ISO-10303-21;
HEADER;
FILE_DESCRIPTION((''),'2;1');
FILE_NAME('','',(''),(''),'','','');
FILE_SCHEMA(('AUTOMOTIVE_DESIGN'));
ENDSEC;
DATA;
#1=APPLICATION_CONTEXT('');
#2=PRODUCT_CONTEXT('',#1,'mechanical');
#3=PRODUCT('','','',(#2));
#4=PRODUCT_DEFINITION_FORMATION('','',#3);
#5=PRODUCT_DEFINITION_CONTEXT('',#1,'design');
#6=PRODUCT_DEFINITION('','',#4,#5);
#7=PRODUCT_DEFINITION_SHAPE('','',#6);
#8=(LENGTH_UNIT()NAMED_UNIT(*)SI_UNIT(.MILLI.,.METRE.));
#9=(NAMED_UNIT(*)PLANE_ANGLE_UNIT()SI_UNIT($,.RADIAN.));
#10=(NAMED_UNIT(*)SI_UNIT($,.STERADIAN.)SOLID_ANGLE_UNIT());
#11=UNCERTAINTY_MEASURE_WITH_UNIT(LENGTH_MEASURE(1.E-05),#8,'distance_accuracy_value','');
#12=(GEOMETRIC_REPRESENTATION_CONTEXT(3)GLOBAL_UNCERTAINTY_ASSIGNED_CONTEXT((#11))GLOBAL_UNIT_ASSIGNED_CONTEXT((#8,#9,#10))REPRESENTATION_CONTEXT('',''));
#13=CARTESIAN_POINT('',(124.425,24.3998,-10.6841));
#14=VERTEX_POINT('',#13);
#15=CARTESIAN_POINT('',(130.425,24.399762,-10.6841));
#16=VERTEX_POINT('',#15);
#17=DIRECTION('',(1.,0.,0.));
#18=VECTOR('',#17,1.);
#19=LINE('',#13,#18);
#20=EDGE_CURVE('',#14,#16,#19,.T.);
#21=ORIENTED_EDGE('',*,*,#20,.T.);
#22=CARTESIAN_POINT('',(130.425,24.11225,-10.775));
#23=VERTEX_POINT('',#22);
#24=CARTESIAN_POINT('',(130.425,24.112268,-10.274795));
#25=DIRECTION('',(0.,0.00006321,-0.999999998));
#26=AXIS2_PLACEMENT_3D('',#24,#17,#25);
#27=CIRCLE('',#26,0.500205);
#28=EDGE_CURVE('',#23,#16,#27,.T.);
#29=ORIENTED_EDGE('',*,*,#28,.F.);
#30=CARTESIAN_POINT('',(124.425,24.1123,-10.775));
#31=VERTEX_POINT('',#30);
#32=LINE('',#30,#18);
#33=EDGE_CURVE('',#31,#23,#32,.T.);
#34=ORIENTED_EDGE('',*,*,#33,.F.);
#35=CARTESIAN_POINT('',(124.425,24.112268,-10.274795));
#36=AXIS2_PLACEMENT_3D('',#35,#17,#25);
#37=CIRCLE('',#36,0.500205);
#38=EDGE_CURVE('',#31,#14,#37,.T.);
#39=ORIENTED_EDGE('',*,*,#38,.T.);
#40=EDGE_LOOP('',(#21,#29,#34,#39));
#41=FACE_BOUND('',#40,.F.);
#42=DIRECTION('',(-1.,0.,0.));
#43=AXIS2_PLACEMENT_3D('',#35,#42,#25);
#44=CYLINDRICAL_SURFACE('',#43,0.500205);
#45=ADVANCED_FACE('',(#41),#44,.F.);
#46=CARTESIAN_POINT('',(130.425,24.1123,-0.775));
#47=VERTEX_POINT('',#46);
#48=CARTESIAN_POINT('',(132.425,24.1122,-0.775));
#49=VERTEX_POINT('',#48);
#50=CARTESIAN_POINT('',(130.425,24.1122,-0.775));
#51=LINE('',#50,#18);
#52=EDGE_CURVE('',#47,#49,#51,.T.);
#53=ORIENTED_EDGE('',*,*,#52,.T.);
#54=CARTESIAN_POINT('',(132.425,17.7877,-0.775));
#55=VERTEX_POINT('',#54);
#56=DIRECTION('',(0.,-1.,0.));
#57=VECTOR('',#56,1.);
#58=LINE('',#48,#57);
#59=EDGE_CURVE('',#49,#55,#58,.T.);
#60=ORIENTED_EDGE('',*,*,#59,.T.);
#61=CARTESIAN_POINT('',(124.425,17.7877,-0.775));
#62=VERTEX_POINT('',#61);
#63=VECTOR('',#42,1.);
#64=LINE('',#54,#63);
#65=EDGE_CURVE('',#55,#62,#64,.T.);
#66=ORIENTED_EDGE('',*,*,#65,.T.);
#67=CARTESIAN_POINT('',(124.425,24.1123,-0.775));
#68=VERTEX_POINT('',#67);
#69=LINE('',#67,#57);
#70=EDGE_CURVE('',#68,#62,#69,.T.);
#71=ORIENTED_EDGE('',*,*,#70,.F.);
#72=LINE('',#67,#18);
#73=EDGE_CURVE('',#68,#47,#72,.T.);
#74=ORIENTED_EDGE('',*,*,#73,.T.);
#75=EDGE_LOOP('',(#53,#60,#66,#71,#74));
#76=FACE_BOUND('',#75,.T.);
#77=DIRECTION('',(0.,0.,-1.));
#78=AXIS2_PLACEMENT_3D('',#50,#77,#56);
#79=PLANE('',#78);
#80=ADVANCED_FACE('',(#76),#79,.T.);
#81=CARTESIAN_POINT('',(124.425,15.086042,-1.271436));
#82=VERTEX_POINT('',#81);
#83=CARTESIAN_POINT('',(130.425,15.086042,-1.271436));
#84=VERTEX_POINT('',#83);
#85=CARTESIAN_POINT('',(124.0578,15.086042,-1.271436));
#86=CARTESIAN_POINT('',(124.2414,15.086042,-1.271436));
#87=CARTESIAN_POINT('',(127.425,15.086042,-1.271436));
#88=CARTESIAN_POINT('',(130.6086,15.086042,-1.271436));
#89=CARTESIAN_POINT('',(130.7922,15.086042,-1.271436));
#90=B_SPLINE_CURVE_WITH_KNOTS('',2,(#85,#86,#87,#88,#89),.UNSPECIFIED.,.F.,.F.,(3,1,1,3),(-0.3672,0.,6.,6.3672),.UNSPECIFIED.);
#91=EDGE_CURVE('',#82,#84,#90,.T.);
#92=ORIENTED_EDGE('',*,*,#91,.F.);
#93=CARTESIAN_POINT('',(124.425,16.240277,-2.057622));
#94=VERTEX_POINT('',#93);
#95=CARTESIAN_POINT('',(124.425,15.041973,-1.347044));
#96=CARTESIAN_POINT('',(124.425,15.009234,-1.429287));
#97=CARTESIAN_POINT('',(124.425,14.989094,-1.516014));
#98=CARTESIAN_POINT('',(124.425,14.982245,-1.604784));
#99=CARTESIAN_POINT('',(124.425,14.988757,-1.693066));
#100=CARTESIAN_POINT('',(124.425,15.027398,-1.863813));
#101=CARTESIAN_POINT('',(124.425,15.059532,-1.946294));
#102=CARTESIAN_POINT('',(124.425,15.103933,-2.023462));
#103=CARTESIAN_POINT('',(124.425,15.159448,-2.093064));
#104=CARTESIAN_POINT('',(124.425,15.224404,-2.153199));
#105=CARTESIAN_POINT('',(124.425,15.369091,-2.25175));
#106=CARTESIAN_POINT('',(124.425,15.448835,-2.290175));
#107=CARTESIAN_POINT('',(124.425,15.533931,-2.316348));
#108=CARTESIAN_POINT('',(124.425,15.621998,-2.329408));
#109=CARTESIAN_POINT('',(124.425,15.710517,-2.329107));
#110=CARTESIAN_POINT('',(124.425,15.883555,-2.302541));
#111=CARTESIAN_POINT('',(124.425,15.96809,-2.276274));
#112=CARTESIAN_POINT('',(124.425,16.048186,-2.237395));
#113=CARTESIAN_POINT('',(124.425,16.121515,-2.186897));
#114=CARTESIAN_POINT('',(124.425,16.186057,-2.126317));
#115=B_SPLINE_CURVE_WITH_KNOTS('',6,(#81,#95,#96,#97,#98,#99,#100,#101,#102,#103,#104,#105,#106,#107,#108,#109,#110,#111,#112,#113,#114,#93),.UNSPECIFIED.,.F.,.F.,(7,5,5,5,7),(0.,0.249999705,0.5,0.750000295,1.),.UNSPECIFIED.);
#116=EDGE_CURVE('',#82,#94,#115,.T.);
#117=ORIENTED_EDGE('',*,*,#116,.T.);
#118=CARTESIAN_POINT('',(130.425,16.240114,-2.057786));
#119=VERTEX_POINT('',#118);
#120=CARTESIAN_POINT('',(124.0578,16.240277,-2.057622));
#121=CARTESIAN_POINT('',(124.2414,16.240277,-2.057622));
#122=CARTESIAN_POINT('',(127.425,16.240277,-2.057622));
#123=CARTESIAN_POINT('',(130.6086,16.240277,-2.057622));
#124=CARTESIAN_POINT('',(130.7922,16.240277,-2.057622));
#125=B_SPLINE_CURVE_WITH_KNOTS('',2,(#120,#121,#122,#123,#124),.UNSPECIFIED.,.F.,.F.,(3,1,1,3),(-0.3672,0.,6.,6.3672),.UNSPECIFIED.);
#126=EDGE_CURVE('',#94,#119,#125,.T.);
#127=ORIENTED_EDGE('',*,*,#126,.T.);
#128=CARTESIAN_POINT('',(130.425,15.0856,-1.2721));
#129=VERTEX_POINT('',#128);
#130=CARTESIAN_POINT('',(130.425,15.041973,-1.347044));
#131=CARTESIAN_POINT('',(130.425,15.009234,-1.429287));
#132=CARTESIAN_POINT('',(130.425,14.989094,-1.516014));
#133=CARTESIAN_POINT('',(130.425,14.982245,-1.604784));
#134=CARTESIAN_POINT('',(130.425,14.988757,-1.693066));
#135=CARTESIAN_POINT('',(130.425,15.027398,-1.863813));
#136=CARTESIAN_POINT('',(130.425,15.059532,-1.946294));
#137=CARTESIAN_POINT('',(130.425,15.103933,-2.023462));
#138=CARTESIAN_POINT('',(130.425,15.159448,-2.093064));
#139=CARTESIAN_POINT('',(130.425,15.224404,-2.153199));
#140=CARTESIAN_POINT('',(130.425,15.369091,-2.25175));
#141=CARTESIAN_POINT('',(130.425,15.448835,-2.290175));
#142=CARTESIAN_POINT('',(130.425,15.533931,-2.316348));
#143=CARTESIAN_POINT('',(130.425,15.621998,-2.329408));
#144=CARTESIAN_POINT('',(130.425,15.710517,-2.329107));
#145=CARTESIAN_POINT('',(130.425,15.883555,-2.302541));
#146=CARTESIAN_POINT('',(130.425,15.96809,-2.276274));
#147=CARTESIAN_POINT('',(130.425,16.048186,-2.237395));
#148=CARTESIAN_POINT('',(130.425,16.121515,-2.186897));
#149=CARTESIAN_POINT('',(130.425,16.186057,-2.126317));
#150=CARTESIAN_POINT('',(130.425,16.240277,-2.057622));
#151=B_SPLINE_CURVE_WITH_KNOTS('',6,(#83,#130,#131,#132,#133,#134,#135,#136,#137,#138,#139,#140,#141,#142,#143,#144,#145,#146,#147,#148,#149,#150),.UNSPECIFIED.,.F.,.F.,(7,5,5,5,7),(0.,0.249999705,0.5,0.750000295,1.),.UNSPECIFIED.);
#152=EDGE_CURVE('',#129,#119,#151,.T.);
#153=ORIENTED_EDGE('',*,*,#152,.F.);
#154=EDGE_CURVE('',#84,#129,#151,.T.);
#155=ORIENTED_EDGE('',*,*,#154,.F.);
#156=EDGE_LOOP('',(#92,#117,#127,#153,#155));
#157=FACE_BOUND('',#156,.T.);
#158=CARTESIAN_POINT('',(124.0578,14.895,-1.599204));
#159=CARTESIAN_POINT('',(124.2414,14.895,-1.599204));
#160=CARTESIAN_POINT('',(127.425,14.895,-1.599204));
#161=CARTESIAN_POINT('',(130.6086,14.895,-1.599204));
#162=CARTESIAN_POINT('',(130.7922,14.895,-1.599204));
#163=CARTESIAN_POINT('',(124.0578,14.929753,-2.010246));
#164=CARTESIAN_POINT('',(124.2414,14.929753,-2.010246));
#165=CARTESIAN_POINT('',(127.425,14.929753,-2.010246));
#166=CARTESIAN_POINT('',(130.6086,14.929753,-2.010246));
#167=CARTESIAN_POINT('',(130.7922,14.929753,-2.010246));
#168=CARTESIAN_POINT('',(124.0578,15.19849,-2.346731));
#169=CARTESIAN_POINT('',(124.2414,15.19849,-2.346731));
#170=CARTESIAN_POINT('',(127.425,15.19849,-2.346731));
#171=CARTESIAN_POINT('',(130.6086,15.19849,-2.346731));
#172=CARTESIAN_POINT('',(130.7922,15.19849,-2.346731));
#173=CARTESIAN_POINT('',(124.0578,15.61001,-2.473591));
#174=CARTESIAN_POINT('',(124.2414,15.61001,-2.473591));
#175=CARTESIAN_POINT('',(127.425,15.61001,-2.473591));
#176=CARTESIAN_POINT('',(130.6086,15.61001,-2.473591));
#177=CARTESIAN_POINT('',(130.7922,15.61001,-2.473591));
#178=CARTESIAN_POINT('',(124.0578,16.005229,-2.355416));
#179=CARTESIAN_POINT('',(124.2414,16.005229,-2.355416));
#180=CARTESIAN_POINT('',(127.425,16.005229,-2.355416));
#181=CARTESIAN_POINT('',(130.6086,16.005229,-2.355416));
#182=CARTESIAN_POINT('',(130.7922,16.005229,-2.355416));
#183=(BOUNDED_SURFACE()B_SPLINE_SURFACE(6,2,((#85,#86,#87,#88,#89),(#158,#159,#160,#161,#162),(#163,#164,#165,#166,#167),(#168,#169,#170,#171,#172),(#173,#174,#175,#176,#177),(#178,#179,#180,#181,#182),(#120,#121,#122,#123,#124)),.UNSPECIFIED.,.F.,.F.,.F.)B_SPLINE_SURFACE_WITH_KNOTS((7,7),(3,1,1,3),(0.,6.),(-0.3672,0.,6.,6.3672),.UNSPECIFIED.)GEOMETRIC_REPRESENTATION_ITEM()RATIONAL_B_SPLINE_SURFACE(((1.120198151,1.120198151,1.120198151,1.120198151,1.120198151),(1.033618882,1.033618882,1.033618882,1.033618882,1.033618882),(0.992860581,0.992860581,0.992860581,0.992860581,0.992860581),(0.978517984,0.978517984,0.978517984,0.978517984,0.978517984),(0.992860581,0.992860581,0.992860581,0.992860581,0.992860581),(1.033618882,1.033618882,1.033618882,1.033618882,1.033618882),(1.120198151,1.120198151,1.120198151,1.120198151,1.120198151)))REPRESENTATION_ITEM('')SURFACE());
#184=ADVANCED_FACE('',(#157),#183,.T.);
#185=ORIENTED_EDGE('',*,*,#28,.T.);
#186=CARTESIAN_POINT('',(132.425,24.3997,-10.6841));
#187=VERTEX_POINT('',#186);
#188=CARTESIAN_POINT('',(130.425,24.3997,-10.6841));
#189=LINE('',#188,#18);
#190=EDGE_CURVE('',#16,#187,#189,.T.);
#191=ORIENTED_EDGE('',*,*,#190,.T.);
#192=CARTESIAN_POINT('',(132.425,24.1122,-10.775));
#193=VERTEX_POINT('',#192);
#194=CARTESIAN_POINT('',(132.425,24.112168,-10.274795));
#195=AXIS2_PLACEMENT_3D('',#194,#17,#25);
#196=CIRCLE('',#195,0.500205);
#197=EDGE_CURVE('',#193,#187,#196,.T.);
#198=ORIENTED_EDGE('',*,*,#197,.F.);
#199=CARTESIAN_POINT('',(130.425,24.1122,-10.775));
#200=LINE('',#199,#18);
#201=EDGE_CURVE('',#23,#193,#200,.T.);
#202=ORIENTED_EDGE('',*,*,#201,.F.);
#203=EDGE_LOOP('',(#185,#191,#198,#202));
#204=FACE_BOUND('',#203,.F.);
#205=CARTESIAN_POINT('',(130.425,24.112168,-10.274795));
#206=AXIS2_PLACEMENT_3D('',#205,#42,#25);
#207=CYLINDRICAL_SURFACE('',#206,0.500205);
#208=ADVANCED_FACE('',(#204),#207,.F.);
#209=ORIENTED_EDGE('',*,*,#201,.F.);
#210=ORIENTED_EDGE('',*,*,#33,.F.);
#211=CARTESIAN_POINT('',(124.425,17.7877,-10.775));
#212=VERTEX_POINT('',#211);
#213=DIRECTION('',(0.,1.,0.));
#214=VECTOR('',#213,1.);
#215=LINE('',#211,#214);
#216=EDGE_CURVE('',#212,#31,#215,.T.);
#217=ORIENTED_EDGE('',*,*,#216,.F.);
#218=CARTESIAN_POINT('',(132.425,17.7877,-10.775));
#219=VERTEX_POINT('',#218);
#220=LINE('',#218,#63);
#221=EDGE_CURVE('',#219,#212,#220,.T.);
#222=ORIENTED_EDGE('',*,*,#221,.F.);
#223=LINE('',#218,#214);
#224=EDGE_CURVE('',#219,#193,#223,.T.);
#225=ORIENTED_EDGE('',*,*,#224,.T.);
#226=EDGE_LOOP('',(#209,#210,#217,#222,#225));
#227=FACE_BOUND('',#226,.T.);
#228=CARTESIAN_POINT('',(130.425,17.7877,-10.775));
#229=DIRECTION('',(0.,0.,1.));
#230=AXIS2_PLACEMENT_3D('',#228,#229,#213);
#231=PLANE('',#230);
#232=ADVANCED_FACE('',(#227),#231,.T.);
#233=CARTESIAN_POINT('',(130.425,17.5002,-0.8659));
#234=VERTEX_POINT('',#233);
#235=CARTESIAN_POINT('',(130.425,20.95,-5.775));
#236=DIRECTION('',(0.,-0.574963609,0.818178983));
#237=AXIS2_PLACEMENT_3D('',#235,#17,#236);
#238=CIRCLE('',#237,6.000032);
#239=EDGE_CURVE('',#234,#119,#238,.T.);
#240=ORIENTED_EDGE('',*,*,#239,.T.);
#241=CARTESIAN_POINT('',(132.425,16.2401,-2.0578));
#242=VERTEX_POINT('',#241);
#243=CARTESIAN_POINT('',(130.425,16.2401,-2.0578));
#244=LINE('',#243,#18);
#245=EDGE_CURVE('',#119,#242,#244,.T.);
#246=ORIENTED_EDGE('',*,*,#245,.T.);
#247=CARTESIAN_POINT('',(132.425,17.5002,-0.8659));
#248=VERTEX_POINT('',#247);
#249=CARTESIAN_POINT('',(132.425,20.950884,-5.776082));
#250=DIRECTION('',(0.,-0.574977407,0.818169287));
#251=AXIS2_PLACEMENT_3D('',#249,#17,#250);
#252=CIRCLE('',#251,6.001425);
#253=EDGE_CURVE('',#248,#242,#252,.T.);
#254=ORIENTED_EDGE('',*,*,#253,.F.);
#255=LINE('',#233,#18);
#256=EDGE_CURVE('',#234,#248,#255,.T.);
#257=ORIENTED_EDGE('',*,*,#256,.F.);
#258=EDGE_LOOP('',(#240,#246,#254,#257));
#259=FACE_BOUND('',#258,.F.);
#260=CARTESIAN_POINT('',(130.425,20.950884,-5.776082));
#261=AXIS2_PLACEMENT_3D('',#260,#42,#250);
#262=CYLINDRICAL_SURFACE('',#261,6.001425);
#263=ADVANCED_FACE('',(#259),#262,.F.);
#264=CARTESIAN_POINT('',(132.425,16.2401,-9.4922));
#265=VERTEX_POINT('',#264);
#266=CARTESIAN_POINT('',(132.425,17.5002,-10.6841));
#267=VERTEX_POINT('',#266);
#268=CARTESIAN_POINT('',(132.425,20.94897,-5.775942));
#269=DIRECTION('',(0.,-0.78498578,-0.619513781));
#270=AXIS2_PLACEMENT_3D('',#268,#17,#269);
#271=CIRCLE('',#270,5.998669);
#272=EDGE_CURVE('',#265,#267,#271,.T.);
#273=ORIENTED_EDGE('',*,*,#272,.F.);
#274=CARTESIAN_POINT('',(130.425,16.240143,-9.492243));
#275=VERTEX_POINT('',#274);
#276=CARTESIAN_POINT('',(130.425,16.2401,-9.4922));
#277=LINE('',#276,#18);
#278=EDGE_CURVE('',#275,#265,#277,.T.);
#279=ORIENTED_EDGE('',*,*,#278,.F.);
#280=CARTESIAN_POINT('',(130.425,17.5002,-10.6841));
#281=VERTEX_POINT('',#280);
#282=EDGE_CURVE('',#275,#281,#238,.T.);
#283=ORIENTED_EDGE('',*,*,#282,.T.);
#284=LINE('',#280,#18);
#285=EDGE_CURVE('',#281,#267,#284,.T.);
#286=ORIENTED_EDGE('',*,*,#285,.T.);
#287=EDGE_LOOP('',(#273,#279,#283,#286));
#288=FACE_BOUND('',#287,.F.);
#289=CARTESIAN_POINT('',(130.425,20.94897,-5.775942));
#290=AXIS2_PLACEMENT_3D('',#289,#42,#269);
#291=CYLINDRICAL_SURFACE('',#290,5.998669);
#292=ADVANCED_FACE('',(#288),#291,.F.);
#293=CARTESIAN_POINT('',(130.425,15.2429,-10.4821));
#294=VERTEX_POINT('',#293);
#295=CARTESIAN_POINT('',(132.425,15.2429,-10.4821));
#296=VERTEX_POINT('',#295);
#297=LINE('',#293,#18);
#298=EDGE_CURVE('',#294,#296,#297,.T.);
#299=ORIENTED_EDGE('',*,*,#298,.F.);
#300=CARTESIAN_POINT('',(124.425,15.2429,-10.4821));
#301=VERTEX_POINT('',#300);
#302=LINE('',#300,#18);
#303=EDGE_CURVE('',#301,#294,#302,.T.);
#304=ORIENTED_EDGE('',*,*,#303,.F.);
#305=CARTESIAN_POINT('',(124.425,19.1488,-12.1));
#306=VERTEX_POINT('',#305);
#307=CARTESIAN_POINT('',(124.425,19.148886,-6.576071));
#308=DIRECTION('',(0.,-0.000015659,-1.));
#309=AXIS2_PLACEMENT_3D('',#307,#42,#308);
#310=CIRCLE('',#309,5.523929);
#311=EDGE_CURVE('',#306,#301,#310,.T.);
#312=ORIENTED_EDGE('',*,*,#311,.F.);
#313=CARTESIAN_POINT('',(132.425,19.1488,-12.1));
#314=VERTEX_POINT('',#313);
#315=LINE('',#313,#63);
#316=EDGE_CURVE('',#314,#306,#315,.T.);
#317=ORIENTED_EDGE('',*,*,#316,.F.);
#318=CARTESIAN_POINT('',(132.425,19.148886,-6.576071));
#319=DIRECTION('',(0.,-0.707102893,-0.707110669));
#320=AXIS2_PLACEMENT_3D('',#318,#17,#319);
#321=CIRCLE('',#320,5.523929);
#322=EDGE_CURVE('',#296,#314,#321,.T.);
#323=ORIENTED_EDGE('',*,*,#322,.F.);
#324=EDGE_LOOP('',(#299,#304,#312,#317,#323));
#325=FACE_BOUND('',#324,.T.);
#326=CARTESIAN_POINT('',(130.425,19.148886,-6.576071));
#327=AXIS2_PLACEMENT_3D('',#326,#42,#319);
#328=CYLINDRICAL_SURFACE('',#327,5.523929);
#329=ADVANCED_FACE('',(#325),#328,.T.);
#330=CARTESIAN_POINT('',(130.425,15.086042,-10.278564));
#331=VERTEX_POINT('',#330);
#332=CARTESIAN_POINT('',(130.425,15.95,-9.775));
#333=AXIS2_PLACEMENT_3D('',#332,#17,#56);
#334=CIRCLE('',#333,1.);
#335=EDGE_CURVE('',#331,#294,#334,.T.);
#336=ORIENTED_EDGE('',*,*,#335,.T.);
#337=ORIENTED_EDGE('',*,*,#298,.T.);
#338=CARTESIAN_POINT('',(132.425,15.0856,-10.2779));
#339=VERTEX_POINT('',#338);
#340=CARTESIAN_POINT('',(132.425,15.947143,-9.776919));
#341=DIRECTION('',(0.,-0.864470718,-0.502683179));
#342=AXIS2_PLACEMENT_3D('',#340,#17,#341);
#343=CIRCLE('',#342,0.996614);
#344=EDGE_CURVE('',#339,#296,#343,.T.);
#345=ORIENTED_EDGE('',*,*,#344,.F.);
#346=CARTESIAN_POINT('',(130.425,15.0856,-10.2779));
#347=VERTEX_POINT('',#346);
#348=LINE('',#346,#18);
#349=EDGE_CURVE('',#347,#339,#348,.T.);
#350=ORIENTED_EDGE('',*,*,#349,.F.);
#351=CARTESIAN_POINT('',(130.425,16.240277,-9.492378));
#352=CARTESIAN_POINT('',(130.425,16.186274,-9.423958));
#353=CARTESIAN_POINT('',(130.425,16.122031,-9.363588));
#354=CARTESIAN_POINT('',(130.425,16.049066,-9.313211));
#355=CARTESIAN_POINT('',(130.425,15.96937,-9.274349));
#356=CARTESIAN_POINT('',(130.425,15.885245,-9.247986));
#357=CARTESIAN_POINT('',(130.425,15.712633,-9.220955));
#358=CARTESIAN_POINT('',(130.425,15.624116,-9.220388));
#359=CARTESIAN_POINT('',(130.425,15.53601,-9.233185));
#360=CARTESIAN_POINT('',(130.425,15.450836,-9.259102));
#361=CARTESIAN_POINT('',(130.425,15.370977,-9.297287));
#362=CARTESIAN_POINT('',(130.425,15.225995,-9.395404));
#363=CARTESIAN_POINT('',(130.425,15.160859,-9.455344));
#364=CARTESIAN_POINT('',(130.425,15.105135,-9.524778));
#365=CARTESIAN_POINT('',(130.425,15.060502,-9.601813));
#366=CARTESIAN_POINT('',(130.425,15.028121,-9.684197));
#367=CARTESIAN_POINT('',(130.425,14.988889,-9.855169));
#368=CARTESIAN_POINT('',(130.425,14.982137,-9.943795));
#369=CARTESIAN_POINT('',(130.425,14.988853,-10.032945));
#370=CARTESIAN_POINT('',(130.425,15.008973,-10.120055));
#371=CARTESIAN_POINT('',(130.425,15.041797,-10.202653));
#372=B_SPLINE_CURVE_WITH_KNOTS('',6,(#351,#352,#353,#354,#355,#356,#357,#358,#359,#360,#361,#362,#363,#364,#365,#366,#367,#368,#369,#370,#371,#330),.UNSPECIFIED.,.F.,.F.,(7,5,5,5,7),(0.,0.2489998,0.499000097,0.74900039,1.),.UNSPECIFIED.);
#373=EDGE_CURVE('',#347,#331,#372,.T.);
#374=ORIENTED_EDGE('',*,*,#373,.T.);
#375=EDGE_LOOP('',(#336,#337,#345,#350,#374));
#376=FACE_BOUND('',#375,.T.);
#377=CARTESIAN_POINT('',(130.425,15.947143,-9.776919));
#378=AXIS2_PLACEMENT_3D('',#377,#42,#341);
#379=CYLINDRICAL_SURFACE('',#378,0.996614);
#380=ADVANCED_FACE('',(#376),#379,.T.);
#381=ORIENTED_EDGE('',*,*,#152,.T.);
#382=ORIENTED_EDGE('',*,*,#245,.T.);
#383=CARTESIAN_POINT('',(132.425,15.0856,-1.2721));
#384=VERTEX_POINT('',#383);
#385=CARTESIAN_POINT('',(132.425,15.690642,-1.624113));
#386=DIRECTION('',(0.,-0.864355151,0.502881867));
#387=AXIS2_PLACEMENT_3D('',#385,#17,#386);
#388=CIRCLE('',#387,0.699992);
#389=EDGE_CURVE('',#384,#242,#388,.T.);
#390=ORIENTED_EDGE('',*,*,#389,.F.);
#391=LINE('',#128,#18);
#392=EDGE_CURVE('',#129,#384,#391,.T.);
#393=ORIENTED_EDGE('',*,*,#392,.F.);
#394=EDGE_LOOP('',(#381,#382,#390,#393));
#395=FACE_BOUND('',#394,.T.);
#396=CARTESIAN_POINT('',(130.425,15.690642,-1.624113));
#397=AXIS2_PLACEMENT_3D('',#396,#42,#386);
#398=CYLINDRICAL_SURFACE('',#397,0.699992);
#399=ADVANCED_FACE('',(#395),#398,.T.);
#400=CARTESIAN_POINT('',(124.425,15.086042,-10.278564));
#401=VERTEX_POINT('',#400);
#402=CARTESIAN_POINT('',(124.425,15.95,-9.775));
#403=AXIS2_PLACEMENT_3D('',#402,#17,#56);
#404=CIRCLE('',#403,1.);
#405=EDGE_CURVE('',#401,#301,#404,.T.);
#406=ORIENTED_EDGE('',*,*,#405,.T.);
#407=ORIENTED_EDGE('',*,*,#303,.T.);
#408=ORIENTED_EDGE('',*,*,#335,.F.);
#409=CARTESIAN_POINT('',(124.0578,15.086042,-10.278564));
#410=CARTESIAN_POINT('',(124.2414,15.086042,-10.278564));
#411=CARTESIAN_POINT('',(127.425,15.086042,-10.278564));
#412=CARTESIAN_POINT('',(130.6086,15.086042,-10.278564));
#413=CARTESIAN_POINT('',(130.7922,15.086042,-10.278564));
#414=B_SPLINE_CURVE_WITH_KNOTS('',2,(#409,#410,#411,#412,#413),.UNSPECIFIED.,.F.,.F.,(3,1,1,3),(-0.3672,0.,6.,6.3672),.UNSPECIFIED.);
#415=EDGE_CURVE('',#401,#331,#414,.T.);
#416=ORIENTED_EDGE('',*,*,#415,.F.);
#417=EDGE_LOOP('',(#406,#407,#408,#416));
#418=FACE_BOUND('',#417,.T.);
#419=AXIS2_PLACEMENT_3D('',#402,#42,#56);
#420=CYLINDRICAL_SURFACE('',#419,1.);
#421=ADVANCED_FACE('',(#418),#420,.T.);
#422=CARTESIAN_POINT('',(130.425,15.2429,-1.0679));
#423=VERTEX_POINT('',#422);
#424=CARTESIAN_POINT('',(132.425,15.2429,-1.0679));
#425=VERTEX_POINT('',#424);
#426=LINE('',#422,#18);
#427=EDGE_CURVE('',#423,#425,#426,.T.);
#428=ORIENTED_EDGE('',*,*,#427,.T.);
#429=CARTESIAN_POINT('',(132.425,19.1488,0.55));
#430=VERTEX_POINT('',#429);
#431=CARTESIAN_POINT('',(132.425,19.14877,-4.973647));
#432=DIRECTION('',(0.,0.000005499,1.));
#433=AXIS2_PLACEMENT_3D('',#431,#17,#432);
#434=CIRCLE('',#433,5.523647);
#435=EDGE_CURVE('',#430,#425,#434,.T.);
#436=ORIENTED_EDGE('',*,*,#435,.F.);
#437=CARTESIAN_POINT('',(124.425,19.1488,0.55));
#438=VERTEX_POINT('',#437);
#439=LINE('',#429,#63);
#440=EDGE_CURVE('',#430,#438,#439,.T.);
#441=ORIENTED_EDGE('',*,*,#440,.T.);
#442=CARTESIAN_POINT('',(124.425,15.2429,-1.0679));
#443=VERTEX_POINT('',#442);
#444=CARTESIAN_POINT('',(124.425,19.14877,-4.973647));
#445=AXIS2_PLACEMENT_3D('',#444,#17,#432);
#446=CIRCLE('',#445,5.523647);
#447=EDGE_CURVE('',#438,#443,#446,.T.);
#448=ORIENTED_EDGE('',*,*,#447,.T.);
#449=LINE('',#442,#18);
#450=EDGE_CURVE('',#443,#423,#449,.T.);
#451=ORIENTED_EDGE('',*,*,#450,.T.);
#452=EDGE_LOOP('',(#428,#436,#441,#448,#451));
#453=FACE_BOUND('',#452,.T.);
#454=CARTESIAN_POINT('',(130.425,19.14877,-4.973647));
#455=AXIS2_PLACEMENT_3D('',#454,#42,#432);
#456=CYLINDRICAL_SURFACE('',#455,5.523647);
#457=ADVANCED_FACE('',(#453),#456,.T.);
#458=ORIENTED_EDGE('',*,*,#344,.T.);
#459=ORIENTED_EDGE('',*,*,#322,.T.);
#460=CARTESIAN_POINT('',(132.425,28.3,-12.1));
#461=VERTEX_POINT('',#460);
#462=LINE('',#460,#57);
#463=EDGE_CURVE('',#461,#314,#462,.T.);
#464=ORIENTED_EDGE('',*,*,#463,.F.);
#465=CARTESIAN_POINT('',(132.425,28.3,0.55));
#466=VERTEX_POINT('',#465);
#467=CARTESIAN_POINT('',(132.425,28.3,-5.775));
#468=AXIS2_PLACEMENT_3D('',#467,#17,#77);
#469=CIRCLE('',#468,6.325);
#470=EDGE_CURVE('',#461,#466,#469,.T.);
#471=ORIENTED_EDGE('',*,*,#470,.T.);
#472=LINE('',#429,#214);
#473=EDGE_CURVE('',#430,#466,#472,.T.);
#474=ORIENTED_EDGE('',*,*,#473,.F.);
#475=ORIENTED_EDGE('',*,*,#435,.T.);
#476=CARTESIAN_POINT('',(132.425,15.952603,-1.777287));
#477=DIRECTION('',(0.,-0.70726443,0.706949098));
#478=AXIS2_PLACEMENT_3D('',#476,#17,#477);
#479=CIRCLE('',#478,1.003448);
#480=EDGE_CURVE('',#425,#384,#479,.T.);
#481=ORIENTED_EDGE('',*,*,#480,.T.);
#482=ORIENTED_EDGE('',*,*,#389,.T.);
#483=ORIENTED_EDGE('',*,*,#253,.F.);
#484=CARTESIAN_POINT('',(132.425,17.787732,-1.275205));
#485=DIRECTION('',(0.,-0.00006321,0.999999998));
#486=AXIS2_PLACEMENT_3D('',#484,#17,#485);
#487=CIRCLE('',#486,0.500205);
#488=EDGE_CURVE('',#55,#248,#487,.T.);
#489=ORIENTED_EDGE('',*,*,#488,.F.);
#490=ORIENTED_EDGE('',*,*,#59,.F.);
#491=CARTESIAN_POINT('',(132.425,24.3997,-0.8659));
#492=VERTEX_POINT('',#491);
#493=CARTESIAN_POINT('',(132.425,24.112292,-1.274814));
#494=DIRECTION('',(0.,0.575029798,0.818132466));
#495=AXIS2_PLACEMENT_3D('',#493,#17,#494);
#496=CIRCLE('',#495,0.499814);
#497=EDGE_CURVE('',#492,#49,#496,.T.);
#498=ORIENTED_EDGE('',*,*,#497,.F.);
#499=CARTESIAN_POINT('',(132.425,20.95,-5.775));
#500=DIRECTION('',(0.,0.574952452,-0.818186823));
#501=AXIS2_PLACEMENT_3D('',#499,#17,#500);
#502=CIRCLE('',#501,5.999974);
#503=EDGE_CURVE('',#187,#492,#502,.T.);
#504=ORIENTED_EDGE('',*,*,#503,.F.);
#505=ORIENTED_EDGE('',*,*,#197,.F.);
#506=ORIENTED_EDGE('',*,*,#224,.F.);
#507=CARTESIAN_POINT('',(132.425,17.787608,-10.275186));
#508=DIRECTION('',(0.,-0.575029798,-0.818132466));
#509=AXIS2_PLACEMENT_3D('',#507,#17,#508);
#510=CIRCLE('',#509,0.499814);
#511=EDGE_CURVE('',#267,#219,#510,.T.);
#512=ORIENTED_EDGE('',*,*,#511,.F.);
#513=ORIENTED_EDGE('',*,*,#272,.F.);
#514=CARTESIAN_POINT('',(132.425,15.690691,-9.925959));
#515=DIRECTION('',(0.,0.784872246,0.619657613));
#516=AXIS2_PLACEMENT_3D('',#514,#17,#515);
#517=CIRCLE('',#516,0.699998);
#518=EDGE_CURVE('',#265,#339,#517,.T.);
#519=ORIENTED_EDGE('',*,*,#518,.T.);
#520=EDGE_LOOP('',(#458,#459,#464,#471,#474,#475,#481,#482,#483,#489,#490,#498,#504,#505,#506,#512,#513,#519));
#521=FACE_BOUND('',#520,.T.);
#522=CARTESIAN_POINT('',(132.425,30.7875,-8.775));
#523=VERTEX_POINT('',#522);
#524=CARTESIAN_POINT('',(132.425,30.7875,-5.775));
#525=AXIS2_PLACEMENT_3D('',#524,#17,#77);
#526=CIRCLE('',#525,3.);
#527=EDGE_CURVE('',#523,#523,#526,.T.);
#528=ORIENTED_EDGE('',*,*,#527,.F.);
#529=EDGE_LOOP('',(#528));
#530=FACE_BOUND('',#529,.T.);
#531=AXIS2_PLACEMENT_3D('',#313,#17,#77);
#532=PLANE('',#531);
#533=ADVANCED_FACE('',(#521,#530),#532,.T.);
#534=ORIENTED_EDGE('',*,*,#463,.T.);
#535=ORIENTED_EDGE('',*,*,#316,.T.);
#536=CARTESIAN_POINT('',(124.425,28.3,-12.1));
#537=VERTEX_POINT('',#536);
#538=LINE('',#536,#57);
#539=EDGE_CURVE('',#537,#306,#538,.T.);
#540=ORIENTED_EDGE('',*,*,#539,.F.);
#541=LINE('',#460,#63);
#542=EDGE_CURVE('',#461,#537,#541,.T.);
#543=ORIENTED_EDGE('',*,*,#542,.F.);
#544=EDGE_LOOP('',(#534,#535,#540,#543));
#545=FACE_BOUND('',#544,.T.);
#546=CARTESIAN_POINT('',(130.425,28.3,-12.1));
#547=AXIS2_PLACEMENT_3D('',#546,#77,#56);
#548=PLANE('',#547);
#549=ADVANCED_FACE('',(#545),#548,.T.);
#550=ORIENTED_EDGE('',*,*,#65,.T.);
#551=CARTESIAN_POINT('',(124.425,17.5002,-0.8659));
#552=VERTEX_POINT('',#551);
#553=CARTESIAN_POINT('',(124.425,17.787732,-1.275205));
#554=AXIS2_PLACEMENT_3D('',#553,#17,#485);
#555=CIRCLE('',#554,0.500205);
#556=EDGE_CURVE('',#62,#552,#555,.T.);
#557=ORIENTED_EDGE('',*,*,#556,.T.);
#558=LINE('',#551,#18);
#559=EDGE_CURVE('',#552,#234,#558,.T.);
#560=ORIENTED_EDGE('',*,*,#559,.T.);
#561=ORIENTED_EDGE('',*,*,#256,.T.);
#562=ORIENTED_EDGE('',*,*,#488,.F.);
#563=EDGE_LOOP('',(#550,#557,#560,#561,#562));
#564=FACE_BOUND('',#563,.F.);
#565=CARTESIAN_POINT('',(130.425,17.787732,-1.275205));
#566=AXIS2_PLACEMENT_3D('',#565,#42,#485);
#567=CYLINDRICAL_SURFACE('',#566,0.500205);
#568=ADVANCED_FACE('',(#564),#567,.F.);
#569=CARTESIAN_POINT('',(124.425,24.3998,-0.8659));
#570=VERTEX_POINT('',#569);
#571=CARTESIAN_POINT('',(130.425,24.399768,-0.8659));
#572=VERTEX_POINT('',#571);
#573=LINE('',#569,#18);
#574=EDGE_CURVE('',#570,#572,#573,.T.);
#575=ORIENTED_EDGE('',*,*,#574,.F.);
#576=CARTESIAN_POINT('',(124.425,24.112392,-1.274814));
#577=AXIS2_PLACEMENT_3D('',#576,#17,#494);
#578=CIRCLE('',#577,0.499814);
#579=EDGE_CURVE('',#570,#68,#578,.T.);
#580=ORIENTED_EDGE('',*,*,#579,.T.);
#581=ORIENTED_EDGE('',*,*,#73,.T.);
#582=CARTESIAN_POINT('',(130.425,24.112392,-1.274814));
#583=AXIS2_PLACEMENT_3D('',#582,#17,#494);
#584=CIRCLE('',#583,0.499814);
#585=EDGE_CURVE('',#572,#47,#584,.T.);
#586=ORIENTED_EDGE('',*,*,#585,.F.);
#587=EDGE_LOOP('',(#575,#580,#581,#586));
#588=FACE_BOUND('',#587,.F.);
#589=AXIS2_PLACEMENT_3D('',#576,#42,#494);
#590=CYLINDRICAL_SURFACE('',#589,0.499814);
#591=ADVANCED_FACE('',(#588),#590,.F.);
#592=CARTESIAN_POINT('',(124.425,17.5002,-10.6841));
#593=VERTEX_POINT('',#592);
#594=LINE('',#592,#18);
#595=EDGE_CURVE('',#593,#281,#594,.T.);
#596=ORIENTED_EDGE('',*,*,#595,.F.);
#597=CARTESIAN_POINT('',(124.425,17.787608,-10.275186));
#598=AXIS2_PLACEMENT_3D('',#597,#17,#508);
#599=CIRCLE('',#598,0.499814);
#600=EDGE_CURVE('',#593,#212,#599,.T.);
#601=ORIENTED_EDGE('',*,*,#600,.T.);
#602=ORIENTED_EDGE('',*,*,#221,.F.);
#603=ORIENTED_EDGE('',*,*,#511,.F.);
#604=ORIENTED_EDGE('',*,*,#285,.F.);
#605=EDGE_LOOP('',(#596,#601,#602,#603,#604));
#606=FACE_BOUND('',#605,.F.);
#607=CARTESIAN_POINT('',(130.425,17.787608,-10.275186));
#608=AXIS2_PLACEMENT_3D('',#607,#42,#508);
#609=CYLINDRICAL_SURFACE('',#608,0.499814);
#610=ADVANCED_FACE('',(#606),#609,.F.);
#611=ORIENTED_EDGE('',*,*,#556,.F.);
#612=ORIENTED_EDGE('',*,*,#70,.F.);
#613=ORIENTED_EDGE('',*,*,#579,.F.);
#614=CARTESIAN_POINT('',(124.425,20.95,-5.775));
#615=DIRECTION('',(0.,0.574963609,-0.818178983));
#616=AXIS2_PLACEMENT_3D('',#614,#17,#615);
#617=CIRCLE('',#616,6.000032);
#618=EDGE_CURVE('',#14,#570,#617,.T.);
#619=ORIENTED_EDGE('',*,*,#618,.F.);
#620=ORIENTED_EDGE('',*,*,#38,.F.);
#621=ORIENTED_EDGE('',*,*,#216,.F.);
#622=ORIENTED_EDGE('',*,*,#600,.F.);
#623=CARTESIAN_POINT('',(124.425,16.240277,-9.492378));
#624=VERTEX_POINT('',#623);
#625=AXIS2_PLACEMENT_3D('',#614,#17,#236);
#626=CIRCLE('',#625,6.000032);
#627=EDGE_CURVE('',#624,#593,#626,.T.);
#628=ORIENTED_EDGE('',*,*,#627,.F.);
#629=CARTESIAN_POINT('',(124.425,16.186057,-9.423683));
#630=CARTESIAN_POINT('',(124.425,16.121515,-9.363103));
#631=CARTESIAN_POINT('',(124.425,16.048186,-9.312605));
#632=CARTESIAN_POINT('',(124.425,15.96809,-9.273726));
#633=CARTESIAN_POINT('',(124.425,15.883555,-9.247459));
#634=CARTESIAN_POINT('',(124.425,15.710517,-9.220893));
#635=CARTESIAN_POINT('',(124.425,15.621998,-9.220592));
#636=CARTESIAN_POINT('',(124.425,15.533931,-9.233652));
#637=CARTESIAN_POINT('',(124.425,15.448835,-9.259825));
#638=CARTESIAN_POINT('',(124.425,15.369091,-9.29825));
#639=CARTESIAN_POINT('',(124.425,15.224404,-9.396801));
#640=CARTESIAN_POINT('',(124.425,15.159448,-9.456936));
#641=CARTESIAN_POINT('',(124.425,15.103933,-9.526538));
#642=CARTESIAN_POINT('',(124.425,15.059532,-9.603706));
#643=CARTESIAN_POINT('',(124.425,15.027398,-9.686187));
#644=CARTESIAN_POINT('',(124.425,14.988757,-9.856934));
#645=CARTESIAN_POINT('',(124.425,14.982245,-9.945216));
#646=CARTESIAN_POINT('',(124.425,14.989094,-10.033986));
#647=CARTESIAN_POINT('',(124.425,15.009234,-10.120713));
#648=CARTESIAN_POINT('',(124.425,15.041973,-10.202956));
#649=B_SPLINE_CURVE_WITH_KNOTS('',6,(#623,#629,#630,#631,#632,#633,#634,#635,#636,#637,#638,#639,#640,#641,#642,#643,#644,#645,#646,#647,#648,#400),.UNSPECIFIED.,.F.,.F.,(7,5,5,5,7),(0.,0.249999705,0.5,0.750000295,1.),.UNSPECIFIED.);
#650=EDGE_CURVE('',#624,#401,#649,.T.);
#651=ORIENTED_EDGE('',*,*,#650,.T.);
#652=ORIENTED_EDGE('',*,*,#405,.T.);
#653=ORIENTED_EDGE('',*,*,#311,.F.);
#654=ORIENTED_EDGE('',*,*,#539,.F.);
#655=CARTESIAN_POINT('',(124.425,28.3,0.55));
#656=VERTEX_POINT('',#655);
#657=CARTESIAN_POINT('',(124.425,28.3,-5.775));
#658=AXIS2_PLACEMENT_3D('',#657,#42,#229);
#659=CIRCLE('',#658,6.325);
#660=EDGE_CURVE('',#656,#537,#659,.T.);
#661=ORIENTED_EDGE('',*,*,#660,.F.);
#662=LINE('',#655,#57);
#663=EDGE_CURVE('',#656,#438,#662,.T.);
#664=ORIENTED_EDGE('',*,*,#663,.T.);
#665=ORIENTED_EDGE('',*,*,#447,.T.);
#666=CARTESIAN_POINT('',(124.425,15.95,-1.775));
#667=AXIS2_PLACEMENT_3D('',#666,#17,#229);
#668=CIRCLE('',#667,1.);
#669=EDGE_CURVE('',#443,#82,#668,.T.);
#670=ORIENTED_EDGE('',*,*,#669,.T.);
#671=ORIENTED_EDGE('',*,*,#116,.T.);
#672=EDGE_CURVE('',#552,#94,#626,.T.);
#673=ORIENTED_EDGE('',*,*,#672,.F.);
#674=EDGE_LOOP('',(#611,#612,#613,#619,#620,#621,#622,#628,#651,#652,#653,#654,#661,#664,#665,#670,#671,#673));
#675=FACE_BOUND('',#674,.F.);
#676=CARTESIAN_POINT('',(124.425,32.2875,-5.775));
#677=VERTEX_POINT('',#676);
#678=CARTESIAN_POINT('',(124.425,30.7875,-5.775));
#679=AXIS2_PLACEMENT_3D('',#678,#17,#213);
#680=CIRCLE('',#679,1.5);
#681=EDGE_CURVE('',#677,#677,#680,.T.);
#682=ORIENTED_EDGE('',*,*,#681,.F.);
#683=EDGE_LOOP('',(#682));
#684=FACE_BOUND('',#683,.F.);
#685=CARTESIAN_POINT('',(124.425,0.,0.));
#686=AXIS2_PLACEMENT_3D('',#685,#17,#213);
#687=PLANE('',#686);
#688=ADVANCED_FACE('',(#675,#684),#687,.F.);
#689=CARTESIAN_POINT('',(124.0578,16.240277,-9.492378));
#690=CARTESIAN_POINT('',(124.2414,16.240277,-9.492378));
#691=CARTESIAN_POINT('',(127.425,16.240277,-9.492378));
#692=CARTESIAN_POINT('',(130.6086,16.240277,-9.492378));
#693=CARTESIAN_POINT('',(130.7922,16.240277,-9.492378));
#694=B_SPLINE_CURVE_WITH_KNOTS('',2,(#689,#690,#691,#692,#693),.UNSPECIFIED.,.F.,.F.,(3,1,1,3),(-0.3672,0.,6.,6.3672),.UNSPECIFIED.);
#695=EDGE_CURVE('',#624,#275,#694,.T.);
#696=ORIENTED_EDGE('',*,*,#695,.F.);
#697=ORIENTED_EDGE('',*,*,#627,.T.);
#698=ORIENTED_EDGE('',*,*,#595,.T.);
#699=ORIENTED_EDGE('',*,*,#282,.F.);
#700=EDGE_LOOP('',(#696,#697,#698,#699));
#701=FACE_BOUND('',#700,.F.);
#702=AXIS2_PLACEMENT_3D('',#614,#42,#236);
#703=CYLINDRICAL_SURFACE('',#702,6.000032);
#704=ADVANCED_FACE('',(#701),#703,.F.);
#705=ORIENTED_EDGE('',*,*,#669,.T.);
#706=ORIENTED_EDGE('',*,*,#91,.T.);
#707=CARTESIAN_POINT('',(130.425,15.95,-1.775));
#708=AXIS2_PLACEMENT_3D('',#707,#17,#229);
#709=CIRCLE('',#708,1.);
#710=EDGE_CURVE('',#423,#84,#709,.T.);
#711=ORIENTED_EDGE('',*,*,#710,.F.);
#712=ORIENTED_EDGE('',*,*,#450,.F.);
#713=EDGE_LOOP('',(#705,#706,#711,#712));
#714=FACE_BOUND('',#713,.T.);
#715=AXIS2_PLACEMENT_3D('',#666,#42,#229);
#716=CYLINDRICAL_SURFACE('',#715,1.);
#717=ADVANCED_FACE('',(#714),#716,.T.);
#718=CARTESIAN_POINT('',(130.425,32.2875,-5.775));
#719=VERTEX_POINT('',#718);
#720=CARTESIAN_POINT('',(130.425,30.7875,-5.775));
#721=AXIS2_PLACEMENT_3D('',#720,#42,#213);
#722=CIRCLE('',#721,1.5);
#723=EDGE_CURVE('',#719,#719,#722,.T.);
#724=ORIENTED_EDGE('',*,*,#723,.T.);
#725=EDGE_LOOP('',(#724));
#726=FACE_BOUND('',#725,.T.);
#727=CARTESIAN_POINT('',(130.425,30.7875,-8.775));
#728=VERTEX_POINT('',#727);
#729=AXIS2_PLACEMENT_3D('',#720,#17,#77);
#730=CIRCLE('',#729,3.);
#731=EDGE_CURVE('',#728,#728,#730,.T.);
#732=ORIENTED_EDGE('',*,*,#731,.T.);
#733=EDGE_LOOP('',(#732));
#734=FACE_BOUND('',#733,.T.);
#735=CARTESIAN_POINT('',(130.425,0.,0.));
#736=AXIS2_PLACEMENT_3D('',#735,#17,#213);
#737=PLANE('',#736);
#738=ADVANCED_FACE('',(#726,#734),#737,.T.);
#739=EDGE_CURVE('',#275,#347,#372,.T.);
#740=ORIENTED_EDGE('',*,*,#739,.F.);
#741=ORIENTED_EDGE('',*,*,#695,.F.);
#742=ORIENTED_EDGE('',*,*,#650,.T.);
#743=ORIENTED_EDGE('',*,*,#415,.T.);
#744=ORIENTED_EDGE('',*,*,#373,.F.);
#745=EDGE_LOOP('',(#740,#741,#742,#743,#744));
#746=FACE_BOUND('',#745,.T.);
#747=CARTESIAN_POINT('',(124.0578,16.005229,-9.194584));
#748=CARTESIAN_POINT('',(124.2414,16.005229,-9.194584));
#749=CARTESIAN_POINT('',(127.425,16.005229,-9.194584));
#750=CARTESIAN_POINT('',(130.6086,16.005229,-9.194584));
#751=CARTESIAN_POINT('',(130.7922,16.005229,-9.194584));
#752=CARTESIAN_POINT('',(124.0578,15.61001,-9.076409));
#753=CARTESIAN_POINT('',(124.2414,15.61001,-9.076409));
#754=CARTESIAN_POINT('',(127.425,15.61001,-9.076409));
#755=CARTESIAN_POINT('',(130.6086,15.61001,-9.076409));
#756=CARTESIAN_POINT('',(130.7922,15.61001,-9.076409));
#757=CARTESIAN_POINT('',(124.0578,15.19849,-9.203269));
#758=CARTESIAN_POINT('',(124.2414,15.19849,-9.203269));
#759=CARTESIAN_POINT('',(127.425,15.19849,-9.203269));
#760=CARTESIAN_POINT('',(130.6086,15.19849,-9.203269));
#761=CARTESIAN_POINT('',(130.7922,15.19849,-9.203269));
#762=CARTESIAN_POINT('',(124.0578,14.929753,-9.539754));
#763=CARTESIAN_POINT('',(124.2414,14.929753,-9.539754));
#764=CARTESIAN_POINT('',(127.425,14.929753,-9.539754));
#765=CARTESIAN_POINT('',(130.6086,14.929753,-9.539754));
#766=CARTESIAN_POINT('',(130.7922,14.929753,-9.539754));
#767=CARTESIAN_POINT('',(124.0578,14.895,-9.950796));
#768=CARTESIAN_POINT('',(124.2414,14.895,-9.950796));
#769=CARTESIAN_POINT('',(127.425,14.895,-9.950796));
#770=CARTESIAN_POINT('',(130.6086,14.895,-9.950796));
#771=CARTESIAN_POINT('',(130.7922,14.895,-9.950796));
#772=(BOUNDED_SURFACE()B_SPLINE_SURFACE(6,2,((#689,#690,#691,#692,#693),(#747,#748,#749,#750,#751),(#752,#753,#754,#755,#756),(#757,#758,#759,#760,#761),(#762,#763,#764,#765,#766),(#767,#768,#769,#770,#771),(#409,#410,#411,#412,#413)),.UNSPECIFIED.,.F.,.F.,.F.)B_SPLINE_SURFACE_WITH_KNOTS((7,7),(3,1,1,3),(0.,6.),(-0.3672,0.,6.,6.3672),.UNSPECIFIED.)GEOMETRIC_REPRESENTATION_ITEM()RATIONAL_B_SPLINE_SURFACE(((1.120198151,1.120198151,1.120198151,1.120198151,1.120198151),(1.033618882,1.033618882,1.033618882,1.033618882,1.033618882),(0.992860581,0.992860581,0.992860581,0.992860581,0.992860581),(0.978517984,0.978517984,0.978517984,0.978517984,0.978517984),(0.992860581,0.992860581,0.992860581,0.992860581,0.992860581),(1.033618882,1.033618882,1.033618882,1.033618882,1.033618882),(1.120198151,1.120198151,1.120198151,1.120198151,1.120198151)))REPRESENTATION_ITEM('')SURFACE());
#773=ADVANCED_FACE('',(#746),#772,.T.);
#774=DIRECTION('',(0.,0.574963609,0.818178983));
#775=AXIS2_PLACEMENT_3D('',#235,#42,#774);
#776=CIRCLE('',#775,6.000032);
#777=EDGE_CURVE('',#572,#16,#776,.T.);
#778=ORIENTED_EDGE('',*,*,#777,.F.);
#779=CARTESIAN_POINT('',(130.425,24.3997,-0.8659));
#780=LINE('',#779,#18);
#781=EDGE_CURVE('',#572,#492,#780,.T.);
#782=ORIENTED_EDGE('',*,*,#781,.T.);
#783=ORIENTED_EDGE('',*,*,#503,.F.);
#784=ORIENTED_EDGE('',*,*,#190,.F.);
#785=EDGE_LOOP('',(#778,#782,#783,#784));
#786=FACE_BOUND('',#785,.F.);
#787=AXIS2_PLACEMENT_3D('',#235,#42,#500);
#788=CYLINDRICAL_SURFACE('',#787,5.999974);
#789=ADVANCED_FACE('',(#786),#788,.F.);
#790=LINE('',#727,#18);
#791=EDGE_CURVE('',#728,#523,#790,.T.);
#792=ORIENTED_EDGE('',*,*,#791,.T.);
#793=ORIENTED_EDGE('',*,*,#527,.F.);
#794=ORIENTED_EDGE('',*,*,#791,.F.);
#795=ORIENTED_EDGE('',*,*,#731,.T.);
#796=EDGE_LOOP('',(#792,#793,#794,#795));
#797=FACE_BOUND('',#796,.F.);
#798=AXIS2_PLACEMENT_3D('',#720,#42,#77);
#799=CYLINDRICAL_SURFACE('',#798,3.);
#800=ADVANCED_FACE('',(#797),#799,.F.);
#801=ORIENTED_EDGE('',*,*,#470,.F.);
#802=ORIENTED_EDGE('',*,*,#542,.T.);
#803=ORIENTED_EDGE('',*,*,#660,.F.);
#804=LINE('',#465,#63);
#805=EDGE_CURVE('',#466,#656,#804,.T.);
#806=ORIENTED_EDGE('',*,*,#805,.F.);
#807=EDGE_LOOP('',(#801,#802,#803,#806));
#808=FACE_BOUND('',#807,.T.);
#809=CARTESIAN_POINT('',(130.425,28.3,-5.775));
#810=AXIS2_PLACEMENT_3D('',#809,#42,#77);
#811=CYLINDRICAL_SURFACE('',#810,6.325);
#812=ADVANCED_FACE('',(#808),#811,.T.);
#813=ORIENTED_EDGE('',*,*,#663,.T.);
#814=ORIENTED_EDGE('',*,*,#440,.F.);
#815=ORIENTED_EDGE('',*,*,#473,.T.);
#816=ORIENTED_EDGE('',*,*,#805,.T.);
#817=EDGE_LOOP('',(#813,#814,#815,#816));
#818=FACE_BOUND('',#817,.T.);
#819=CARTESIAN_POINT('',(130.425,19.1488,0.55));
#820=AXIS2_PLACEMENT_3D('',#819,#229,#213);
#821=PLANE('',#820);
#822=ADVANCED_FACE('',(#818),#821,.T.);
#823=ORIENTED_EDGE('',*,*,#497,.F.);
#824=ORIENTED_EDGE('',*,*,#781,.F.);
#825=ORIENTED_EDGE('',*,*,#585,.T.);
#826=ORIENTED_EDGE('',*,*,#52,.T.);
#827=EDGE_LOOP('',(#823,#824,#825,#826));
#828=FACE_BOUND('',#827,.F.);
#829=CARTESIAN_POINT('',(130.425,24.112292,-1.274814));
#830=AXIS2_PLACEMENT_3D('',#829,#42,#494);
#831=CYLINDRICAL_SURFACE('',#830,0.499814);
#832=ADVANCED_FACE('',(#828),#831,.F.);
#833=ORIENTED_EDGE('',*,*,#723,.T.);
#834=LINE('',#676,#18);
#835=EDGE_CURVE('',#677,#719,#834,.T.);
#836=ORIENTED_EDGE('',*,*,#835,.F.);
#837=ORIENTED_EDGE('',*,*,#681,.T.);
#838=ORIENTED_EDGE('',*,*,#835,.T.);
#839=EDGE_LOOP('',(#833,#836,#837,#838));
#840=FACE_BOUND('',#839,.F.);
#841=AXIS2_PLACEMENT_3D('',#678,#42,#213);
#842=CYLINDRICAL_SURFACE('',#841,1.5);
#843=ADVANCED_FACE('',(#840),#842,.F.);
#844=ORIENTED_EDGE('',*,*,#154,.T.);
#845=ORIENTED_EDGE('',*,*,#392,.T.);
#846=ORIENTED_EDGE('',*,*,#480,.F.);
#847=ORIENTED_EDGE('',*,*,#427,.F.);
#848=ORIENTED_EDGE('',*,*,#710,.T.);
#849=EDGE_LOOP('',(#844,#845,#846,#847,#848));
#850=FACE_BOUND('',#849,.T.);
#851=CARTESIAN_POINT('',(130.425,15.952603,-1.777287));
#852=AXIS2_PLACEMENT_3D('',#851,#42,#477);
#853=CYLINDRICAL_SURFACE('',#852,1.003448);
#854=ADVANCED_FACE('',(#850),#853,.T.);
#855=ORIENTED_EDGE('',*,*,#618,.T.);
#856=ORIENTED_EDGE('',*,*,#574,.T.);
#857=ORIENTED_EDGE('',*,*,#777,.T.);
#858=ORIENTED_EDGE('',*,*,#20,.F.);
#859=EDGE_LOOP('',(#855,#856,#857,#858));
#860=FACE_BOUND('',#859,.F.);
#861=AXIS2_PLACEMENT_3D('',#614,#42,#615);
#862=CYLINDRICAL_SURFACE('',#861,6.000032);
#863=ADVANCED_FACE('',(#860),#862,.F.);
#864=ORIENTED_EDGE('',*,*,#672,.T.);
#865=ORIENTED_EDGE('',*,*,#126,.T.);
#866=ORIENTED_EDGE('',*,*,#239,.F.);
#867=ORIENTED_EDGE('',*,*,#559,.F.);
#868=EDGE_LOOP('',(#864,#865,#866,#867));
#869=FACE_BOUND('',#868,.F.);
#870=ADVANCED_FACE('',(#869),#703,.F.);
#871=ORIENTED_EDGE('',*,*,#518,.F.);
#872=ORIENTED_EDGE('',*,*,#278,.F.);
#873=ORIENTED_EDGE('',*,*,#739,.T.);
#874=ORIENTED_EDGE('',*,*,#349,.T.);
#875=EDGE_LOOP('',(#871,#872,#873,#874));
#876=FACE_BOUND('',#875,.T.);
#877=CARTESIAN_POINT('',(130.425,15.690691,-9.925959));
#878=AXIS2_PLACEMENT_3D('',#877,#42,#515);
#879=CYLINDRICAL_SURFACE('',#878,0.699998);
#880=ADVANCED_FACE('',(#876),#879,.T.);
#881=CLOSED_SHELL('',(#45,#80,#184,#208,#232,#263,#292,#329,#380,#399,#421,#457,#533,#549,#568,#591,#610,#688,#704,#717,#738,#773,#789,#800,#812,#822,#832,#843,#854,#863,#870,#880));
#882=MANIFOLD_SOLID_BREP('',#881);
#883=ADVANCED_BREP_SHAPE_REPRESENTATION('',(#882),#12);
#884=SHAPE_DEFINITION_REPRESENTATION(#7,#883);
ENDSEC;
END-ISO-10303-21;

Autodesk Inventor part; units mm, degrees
ref_plane "YZ Plane" through (0, 0, 0) normal (1, 0, 0) x (0, 1, 0)
ref_plane "XZ Plane" through (0, 0, 0) normal (0, 1, 0) x (-1, 0, 0)
sketch "Sketch1" plane through (0, 0, 0) normal (1, 0, 0) x (0, 1, 0)
  line L0 (14.875, -0.7) -> (14.875, 0.8967) projected
  line L1 (27.025, -0.7) -> (14.875, -0.7) projected
  line L2 (27.025, -10.85) -> (27.025, -0.7) projected
  line L3 (15.75, -10.85) -> (27.025, -10.85) projected
  line L4 (34.625, -12.1) -> (15.75, -12.1) projected
  line L5 (34.625, -3.2) -> (34.625, -12.1) projected
  line L6 (15.7197, 0.55) -> (30.875, 0.55) projected
  arc A0 (17.7877, -0.775) -> (17.5002, -0.8659) centre (17.7877, -1.275) ccw projected
  arc A1 (17.5002, -0.8659) -> (17.5002, -10.6841) centre (20.95, -5.775) ccw projected
  arc A2 (17.5002, -10.6841) -> (17.7877, -10.775) centre (17.7877, -10.275) ccw projected
  line L7 (17.7877, -10.775) -> (24.1123, -10.775) projected
  arc A3 (24.1123, -10.775) -> (24.3998, -10.6841) centre (24.1123, -10.275) ccw projected
  arc A4 (24.3998, -10.6841) -> (24.3998, -0.8659) centre (20.95, -5.775) ccw projected
  arc A5 (24.3998, -0.8659) -> (24.1123, -0.775) centre (24.1123, -1.275) ccw projected
  line L8 (24.1123, -0.775) -> (17.7877, -0.775) projected
  line L9 (26.95, -5.775) -> (26.95, -9.775) projected
  arc A6 (24.3998, -10.6841) -> (26.95, -5.775) centre (20.95, -5.775) ccw projected
  arc A7 (24.1123, -10.775) -> (24.3998, -10.6841) centre (24.1123, -10.275) ccw projected
  line L10 (25.95, -10.775) -> (24.1123, -10.775) projected
  arc A8 (25.95, -10.775) -> (26.95, -9.775) centre (25.95, -9.775) ccw projected
  line L11 (24.1123, -0.775) -> (25.95, -0.775) projected
  arc A9 (24.3998, -0.8659) -> (24.1123, -0.775) centre (24.1123, -1.275) ccw projected
  arc A10 (26.95, -5.775) -> (24.3998, -0.8659) centre (20.95, -5.775) ccw projected
  line L12 (26.95, -1.775) -> (26.95, -5.775) projected
  arc A11 (26.95, -1.775) -> (25.95, -0.775) centre (25.95, -1.775) ccw projected
  line L13 (14.95, -5.775) -> (14.95, -1.775) projected
  arc A12 (17.5002, -0.8659) -> (14.95, -5.775) centre (20.95, -5.775) ccw projected
  arc A13 (17.7877, -0.775) -> (17.5002, -0.8659) centre (17.7877, -1.275) ccw projected
  line L14 (15.95, -0.775) -> (17.7877, -0.775) projected
  arc A14 (15.95, -0.775) -> (14.95, -1.775) centre (15.95, -1.775) ccw projected
  line L15 (17.7877, -10.775) -> (15.95, -10.775) projected
  arc A15 (17.5002, -10.6841) -> (17.7877, -10.775) centre (17.7877, -10.275) ccw projected
  arc A16 (14.95, -5.775) -> (17.5002, -10.6841) centre (20.95, -5.775) ccw projected
  line L16 (14.95, -9.775) -> (14.95, -5.775) projected
  arc A17 (14.95, -9.775) -> (15.95, -10.775) centre (15.95, -9.775) ccw projected
  line L17 (26.95, -10.85) -> (14.95, -10.85)
  line L18 (14.95, -10.85) -> (14.95, -12.1)
  line L19 (14.95, -12.1) -> (26.95, -12.1)
  line L20 (26.95, -12.1) -> (26.95, -10.85)
  line L21 (20.95, -5.775) -> (14.95, -5.775)
  arc A18 (15.2429, -10.4821) -> (19.1488, -12.1) centre (19.1488, -6.5762) ccw
  arc A19 (15.8269, -8.8981) -> (14.95, -9.775) centre (15.8269, -9.775) ccw
  line L22 (14.95, -9.775) -> (15.8269, -8.8981) construction
  line L23 (14.95, -9.775) -> (16.1901, -9.775) construction
  line L24 (26.95, -0.7) -> (14.95, -0.7)
  line L25 (14.95, -0.7) -> (14.95, 0.55)
  line L26 (14.95, 0.55) -> (26.95, 0.55)
  line L27 (26.95, 0.55) -> (26.95, -0.7)
  arc A20 (19.1488, 0.55) -> (15.2429, -1.0679) centre (19.1488, -4.9738) ccw
  arc A21 (14.95, -1.775) -> (15.8269, -2.6519) centre (15.8269, -1.775) ccw
  line L28 (26.95, -12.1) -> (26.95, 0.55)
  line L29 (26.95, 0.55) -> (34.625, 0.55)
  line L30 (34.625, 0.55) -> (34.625, -12.1)
  line L31 (34.625, -12.1) -> (26.95, -12.1)
  line L32 (26.95, -5.775) -> (34.625, -5.775)
  circle A22 centre (30.7875, -5.775) radius 1.5
  circle A23 centre (30.7875, -5.775) radius 3
  arc A24 (28.3, -12.1) -> (34.625, -5.775) centre (28.3, -5.775) ccw
  arc A25 (34.625, -5.775) -> (28.3, 0.55) centre (28.3, -5.775) ccw
  line L33 (15.75, -12.1) -> (15.75, -10.85) projected
  arc A26 (34.625, -3.2) -> (30.875, 0.55) centre (30.875, -3.2) ccw projected
  arc A27 (14.8505, 1.3251) -> (15.7197, 0.55) centre (15.7197, 1.425) ccw projected
  arc A28 (14.875, 0.8967) -> (14.8505, 1.3251) centre (11.125, 0.8967) ccw projected
  circle A29 centre (30.7875, -5.775) radius 1.4375 projected
  point P0 (0, 0)
  point P1 (15.8269, -8.8981)
  point P2 (19.1488, -12.1)
  point P3 (28.3, -12.1)
  point P4 (28.3, 0.55)
  point P5 (19.1488, 0.55)
  point P6 (15.2429, -1.0679)
  point P7 (15.8269, -2.6519)
  point P8 (15.75, -10.9306)
  point P9 (27.025, -5.775)
  point P10 (15.6492, -0.7)
  dimension "d0" = 1.25
  dimension "d1" = 45
  dimension "d2" = 3
  dimension "d3" = 6
ref_plane "Work Plane1" through (124.425, 27.025, -10.85) normal (1, 0, 0) x (0, 1, 0)
extrude "Extrusion1" add sketch "Sketch1" along normal blind 6 from surface at 124.425 contours A20 L6 L27 L1 | L1 L28 A11 L11 L8 L14 A14 A20 | L27 L6 A25 L32 A23 L2 L1 | L1 L2 L32 L12 L28 | A14 L14 A0 A1 A21 | L12 A4 A5 L11 A11 | L32 A23 A24 L4 L20 L3 L2 | L2 L3 L28 L9 L32 | L9 A8 L10 A3 A4 | A23 L32 A22 | L32 A22 A23 | L28 L3 L17 A18 A17 L15 L7 L10 A8 | A1 A2 L15 A17 A19 | L20 L4 A18 L33 L3 | L33 A18 L17
fillet "Fillet1" radius 0.7 2 edges at (127.425, 15.8269, -2.6519) (127.425, 15.8269, -8.8981)
sketch "Sketch2" plane through (130.425, 19.1488, -12.1) normal (1, 0, 0) x (0, 0, -1)
  arc A0 (-2.6078, -2.9087) -> (-1.8221, -4.0632) centre (-2.1741, -3.4581) ccw projected
  line L0 (0, 9.1512) -> (0, 0) projected
  line L1 (-12.65, 0) -> (-12.65, 9.1512) projected
  arc A1 (-11.0321, -3.9059) -> (-10.8279, -4.0632) centre (-10.325, -3.1988) ccw projected
  arc A2 (-11.2341, -1.6486) -> (-10.0422, -2.9087) centre (-6.325, 1.8012) ccw projected
  arc A3 (-11.325, -1.3611) -> (-11.2341, -1.6486) centre (-10.825, -1.3611) ccw projected
  arc A4 (-2.6078, -2.9087) -> (-1.4159, -1.6486) centre (-6.325, 1.8012) ccw projected
  circle A5 centre (-6.325, 11.6387) radius 1.5 projected
  circle A6 centre (-6.325, 11.6387) radius 3
  arc A7 (-1.8221, -4.0632) -> (-1.6179, -3.9059) centre (-2.325, -3.1988) ccw projected
  arc A8 (-1.6179, -3.9059) -> (0, 0) centre (-5.5238, 0) ccw projected
  arc A9 (0, 9.1512) -> (-12.65, 9.1512) centre (-6.325, 9.1512) ccw projected
  arc A10 (-12.65, 0) -> (-11.0321, -3.9059) centre (-7.1262, 0) ccw projected
  arc A11 (-10.8279, -4.0632) -> (-10.0422, -2.9087) centre (-10.4759, -3.4581) ccw projected
  line L2 (-11.325, 4.9634) -> (-11.325, -1.3611) projected
  arc A12 (-11.2341, 5.2509) -> (-11.325, 4.9634) centre (-10.825, 4.9634) ccw projected
  arc A13 (-1.4159, 5.2509) -> (-11.2341, 5.2509) centre (-6.325, 1.8012) ccw projected
  arc A14 (-1.325, 4.9634) -> (-1.4159, 5.2509) centre (-1.825, 4.9634) ccw projected
  line L3 (-1.325, -1.3611) -> (-1.325, 4.9634) projected
  arc A15 (-1.4159, -1.6486) -> (-1.325, -1.3611) centre (-1.825, -1.3611) ccw projected
  point P0 (-12.1, -19.1488)
  dimension "d7" = 6
extrude "Extrusion2" add sketch "Sketch2" along normal blind 2 contours A4 A15 L3 A14 A13 A12 L2 A3 A2 A11 A1 A10 L1 A9 L0 A8 A7 A0
properties part number "X Stage Motor Clamp V5"
